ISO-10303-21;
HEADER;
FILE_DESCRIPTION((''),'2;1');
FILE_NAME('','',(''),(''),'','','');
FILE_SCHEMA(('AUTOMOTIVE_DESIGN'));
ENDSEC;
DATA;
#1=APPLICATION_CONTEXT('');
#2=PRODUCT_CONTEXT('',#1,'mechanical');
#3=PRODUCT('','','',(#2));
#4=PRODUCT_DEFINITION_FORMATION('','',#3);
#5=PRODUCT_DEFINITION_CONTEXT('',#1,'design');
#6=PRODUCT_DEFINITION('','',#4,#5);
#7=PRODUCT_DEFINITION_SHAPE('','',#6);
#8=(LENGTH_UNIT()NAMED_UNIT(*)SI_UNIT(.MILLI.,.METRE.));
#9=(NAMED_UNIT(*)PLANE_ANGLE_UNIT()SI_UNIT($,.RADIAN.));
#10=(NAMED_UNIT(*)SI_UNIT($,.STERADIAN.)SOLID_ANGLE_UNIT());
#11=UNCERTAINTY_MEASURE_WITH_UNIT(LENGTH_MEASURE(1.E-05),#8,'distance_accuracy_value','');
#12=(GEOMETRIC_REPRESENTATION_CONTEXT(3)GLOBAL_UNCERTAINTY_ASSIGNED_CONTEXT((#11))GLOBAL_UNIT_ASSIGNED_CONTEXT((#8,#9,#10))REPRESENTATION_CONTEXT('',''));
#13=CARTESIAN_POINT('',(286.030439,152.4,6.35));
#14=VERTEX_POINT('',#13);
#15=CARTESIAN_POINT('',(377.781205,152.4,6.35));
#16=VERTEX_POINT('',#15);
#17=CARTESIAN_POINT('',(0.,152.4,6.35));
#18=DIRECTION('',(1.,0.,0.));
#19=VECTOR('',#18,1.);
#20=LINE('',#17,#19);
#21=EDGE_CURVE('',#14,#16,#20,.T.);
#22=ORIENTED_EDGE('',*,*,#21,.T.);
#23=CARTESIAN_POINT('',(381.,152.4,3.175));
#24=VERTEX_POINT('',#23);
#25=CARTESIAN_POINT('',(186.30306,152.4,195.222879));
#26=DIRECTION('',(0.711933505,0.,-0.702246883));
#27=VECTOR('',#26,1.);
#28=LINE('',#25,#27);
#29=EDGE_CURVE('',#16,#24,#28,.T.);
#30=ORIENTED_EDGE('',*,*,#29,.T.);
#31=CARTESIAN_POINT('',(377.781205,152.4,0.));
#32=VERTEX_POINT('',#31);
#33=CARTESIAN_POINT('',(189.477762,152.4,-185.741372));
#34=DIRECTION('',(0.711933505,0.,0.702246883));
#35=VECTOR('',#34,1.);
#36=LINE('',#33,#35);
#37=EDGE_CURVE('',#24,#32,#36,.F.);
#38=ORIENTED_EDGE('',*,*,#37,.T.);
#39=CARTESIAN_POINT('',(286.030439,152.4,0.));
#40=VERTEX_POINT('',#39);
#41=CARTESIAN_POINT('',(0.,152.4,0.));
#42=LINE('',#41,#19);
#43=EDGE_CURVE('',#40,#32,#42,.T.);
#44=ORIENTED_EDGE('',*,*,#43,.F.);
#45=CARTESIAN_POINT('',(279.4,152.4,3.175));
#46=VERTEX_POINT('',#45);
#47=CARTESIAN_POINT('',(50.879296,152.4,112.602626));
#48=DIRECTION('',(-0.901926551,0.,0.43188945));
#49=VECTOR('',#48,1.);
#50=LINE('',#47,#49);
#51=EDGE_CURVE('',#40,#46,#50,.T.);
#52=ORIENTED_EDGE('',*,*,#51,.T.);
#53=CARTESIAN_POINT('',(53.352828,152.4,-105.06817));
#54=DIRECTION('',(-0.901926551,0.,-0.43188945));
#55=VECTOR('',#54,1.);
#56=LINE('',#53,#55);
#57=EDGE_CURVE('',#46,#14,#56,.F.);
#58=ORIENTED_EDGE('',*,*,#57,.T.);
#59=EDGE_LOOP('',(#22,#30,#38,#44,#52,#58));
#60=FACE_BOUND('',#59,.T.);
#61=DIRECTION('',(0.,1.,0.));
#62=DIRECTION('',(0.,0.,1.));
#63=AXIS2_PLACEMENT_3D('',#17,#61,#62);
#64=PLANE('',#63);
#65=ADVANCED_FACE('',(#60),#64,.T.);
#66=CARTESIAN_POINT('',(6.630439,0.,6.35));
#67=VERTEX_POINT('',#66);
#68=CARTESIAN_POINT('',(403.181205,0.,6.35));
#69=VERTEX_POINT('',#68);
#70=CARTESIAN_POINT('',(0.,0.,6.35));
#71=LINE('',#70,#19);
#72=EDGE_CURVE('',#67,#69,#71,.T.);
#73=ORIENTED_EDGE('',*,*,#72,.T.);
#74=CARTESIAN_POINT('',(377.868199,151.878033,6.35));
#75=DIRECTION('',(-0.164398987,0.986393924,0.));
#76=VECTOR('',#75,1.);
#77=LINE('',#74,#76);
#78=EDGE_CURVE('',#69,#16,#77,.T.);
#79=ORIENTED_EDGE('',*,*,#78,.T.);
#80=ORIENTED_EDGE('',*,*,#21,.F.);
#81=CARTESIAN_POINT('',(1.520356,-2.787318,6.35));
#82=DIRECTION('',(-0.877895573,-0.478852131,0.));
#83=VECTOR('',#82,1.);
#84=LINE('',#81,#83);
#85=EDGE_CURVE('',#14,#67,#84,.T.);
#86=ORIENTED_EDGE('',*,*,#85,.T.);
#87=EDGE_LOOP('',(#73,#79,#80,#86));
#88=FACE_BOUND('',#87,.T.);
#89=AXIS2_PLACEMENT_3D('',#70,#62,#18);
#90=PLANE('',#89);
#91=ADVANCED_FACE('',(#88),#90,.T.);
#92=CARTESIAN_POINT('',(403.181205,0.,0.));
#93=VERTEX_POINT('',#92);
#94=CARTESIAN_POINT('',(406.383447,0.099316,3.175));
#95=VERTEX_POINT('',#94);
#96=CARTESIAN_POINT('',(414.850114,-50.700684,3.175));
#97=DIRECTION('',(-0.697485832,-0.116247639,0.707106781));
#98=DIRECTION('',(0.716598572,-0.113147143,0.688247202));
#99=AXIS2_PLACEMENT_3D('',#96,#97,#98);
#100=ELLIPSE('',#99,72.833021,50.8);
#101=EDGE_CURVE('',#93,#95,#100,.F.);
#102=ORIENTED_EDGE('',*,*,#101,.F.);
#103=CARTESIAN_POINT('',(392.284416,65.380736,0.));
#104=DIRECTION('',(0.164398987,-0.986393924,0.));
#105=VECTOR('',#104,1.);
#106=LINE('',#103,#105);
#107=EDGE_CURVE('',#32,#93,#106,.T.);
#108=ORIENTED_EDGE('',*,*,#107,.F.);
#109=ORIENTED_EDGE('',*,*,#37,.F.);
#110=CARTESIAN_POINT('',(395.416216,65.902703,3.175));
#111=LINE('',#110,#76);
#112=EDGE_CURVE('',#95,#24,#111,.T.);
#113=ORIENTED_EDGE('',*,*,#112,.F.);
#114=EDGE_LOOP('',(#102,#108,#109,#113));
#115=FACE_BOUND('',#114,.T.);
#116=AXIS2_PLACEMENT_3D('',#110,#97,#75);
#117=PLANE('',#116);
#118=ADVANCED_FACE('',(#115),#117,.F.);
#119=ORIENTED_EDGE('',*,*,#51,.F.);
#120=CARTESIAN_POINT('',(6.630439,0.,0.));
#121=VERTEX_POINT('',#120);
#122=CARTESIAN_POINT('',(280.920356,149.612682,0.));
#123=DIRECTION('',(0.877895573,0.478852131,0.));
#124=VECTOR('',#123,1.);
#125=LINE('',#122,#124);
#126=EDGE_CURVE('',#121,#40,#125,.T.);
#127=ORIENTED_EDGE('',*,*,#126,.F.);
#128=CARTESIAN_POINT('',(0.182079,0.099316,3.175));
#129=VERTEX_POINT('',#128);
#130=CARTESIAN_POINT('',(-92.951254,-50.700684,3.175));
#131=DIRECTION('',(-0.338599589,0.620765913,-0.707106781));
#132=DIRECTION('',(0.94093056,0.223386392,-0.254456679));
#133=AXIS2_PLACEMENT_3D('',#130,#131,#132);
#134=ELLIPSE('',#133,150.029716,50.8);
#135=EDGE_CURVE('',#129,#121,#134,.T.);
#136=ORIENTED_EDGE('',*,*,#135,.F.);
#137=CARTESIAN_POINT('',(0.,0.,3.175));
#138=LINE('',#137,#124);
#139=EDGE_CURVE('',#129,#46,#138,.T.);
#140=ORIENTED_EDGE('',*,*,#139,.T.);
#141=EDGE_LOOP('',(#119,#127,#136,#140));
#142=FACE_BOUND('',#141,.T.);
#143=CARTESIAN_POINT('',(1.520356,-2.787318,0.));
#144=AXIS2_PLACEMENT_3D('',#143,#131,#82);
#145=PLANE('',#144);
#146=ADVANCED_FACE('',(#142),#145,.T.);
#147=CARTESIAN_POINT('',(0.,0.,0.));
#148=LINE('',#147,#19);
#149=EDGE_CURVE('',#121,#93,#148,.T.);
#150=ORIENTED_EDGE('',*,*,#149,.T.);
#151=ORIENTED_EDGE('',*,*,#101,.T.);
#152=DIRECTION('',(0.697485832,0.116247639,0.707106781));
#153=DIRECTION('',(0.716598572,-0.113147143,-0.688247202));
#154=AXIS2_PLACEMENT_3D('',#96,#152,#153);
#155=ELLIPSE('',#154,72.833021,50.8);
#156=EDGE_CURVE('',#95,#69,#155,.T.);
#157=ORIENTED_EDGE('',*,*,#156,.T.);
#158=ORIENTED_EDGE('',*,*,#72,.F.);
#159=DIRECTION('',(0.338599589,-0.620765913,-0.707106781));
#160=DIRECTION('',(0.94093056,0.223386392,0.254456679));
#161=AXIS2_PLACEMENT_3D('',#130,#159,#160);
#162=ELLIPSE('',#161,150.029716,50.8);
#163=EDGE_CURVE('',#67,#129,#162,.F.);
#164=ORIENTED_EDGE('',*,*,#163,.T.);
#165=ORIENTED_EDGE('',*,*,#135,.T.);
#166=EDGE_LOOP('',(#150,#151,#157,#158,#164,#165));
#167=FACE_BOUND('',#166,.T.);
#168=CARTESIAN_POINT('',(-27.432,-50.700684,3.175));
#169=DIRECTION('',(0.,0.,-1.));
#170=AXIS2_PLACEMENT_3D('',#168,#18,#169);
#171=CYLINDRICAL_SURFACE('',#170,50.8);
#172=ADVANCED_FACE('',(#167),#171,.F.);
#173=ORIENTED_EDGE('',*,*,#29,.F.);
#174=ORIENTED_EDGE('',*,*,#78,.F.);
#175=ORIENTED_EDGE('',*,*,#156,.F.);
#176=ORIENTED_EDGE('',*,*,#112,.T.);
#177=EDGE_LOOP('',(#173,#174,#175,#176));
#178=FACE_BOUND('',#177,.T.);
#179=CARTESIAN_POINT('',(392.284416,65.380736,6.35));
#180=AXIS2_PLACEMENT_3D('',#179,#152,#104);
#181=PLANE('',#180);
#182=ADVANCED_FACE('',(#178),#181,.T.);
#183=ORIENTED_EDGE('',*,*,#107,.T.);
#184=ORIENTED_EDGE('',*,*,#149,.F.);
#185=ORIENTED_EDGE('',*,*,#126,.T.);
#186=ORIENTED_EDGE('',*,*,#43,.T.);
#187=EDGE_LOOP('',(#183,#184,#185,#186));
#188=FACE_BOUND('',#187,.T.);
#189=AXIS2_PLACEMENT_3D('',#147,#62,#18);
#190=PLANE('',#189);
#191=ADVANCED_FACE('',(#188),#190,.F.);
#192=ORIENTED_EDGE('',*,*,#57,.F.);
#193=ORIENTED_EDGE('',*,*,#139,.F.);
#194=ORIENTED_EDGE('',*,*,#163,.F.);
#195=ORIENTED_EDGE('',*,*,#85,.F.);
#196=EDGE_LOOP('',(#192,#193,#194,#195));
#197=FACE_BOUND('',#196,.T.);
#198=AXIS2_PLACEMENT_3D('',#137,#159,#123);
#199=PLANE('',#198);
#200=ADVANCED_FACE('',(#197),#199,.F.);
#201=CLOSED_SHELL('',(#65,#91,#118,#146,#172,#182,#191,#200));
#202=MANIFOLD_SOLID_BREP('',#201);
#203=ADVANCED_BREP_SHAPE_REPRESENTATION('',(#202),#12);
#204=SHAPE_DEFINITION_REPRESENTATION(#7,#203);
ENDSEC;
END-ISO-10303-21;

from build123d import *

# Parameters (mm, degrees)
BOSS_EXTRUDE1_DEPTH     = 6.35
CHAMFER1_SIZE           = 3.175
CUT_EXTRUDE1_DEPTH      = 421.64
CUT_EXTRUDE1_DEPTH_BACK = 27.432
SKETCH2_R               = 50.8


with BuildPart() as part:
    # Sketch1 → Boss-Extrude1 (new body)
    with BuildSketch(Plane.XY):
        Polygon((279.4, 152.4), (0, 0), (279.4, 0), align=None)
        Polygon((279.4, 152.4), (279.4, 0), (406.4, 0), (381, 152.4), align=None)
    extrude(amount=BOSS_EXTRUDE1_DEPTH)

    # Chamfer1
    chamfer1_edges = [part.edges().sort_by_distance(p)[0] for p in [
        (393.7, 76.2, 6.35),
        (393.7, 76.2, 0),
        (139.7, 76.2, 0),
        (139.7, 76.2, 6.35),
    ]]
    chamfer(chamfer1_edges, length=CHAMFER1_SIZE - 0.0001)  # a hair under: the kernel refuses the full size

    # Sketch2 → Cut-Extrude1 (cut, two sides: drawn at the far end of the back side and taken through both)
    with BuildSketch(Plane(origin=(0, 0, 0), x_dir=(0, 0, -1), z_dir=(1, 0, 0)).offset(-CUT_EXTRUDE1_DEPTH_BACK)):
        with Locations((-3.175, -50.700684167)):
            Circle(SKETCH2_R)
    extrude(amount=CUT_EXTRUDE1_DEPTH + CUT_EXTRUDE1_DEPTH_BACK, mode=Mode.SUBTRACT)


solid = part.part
